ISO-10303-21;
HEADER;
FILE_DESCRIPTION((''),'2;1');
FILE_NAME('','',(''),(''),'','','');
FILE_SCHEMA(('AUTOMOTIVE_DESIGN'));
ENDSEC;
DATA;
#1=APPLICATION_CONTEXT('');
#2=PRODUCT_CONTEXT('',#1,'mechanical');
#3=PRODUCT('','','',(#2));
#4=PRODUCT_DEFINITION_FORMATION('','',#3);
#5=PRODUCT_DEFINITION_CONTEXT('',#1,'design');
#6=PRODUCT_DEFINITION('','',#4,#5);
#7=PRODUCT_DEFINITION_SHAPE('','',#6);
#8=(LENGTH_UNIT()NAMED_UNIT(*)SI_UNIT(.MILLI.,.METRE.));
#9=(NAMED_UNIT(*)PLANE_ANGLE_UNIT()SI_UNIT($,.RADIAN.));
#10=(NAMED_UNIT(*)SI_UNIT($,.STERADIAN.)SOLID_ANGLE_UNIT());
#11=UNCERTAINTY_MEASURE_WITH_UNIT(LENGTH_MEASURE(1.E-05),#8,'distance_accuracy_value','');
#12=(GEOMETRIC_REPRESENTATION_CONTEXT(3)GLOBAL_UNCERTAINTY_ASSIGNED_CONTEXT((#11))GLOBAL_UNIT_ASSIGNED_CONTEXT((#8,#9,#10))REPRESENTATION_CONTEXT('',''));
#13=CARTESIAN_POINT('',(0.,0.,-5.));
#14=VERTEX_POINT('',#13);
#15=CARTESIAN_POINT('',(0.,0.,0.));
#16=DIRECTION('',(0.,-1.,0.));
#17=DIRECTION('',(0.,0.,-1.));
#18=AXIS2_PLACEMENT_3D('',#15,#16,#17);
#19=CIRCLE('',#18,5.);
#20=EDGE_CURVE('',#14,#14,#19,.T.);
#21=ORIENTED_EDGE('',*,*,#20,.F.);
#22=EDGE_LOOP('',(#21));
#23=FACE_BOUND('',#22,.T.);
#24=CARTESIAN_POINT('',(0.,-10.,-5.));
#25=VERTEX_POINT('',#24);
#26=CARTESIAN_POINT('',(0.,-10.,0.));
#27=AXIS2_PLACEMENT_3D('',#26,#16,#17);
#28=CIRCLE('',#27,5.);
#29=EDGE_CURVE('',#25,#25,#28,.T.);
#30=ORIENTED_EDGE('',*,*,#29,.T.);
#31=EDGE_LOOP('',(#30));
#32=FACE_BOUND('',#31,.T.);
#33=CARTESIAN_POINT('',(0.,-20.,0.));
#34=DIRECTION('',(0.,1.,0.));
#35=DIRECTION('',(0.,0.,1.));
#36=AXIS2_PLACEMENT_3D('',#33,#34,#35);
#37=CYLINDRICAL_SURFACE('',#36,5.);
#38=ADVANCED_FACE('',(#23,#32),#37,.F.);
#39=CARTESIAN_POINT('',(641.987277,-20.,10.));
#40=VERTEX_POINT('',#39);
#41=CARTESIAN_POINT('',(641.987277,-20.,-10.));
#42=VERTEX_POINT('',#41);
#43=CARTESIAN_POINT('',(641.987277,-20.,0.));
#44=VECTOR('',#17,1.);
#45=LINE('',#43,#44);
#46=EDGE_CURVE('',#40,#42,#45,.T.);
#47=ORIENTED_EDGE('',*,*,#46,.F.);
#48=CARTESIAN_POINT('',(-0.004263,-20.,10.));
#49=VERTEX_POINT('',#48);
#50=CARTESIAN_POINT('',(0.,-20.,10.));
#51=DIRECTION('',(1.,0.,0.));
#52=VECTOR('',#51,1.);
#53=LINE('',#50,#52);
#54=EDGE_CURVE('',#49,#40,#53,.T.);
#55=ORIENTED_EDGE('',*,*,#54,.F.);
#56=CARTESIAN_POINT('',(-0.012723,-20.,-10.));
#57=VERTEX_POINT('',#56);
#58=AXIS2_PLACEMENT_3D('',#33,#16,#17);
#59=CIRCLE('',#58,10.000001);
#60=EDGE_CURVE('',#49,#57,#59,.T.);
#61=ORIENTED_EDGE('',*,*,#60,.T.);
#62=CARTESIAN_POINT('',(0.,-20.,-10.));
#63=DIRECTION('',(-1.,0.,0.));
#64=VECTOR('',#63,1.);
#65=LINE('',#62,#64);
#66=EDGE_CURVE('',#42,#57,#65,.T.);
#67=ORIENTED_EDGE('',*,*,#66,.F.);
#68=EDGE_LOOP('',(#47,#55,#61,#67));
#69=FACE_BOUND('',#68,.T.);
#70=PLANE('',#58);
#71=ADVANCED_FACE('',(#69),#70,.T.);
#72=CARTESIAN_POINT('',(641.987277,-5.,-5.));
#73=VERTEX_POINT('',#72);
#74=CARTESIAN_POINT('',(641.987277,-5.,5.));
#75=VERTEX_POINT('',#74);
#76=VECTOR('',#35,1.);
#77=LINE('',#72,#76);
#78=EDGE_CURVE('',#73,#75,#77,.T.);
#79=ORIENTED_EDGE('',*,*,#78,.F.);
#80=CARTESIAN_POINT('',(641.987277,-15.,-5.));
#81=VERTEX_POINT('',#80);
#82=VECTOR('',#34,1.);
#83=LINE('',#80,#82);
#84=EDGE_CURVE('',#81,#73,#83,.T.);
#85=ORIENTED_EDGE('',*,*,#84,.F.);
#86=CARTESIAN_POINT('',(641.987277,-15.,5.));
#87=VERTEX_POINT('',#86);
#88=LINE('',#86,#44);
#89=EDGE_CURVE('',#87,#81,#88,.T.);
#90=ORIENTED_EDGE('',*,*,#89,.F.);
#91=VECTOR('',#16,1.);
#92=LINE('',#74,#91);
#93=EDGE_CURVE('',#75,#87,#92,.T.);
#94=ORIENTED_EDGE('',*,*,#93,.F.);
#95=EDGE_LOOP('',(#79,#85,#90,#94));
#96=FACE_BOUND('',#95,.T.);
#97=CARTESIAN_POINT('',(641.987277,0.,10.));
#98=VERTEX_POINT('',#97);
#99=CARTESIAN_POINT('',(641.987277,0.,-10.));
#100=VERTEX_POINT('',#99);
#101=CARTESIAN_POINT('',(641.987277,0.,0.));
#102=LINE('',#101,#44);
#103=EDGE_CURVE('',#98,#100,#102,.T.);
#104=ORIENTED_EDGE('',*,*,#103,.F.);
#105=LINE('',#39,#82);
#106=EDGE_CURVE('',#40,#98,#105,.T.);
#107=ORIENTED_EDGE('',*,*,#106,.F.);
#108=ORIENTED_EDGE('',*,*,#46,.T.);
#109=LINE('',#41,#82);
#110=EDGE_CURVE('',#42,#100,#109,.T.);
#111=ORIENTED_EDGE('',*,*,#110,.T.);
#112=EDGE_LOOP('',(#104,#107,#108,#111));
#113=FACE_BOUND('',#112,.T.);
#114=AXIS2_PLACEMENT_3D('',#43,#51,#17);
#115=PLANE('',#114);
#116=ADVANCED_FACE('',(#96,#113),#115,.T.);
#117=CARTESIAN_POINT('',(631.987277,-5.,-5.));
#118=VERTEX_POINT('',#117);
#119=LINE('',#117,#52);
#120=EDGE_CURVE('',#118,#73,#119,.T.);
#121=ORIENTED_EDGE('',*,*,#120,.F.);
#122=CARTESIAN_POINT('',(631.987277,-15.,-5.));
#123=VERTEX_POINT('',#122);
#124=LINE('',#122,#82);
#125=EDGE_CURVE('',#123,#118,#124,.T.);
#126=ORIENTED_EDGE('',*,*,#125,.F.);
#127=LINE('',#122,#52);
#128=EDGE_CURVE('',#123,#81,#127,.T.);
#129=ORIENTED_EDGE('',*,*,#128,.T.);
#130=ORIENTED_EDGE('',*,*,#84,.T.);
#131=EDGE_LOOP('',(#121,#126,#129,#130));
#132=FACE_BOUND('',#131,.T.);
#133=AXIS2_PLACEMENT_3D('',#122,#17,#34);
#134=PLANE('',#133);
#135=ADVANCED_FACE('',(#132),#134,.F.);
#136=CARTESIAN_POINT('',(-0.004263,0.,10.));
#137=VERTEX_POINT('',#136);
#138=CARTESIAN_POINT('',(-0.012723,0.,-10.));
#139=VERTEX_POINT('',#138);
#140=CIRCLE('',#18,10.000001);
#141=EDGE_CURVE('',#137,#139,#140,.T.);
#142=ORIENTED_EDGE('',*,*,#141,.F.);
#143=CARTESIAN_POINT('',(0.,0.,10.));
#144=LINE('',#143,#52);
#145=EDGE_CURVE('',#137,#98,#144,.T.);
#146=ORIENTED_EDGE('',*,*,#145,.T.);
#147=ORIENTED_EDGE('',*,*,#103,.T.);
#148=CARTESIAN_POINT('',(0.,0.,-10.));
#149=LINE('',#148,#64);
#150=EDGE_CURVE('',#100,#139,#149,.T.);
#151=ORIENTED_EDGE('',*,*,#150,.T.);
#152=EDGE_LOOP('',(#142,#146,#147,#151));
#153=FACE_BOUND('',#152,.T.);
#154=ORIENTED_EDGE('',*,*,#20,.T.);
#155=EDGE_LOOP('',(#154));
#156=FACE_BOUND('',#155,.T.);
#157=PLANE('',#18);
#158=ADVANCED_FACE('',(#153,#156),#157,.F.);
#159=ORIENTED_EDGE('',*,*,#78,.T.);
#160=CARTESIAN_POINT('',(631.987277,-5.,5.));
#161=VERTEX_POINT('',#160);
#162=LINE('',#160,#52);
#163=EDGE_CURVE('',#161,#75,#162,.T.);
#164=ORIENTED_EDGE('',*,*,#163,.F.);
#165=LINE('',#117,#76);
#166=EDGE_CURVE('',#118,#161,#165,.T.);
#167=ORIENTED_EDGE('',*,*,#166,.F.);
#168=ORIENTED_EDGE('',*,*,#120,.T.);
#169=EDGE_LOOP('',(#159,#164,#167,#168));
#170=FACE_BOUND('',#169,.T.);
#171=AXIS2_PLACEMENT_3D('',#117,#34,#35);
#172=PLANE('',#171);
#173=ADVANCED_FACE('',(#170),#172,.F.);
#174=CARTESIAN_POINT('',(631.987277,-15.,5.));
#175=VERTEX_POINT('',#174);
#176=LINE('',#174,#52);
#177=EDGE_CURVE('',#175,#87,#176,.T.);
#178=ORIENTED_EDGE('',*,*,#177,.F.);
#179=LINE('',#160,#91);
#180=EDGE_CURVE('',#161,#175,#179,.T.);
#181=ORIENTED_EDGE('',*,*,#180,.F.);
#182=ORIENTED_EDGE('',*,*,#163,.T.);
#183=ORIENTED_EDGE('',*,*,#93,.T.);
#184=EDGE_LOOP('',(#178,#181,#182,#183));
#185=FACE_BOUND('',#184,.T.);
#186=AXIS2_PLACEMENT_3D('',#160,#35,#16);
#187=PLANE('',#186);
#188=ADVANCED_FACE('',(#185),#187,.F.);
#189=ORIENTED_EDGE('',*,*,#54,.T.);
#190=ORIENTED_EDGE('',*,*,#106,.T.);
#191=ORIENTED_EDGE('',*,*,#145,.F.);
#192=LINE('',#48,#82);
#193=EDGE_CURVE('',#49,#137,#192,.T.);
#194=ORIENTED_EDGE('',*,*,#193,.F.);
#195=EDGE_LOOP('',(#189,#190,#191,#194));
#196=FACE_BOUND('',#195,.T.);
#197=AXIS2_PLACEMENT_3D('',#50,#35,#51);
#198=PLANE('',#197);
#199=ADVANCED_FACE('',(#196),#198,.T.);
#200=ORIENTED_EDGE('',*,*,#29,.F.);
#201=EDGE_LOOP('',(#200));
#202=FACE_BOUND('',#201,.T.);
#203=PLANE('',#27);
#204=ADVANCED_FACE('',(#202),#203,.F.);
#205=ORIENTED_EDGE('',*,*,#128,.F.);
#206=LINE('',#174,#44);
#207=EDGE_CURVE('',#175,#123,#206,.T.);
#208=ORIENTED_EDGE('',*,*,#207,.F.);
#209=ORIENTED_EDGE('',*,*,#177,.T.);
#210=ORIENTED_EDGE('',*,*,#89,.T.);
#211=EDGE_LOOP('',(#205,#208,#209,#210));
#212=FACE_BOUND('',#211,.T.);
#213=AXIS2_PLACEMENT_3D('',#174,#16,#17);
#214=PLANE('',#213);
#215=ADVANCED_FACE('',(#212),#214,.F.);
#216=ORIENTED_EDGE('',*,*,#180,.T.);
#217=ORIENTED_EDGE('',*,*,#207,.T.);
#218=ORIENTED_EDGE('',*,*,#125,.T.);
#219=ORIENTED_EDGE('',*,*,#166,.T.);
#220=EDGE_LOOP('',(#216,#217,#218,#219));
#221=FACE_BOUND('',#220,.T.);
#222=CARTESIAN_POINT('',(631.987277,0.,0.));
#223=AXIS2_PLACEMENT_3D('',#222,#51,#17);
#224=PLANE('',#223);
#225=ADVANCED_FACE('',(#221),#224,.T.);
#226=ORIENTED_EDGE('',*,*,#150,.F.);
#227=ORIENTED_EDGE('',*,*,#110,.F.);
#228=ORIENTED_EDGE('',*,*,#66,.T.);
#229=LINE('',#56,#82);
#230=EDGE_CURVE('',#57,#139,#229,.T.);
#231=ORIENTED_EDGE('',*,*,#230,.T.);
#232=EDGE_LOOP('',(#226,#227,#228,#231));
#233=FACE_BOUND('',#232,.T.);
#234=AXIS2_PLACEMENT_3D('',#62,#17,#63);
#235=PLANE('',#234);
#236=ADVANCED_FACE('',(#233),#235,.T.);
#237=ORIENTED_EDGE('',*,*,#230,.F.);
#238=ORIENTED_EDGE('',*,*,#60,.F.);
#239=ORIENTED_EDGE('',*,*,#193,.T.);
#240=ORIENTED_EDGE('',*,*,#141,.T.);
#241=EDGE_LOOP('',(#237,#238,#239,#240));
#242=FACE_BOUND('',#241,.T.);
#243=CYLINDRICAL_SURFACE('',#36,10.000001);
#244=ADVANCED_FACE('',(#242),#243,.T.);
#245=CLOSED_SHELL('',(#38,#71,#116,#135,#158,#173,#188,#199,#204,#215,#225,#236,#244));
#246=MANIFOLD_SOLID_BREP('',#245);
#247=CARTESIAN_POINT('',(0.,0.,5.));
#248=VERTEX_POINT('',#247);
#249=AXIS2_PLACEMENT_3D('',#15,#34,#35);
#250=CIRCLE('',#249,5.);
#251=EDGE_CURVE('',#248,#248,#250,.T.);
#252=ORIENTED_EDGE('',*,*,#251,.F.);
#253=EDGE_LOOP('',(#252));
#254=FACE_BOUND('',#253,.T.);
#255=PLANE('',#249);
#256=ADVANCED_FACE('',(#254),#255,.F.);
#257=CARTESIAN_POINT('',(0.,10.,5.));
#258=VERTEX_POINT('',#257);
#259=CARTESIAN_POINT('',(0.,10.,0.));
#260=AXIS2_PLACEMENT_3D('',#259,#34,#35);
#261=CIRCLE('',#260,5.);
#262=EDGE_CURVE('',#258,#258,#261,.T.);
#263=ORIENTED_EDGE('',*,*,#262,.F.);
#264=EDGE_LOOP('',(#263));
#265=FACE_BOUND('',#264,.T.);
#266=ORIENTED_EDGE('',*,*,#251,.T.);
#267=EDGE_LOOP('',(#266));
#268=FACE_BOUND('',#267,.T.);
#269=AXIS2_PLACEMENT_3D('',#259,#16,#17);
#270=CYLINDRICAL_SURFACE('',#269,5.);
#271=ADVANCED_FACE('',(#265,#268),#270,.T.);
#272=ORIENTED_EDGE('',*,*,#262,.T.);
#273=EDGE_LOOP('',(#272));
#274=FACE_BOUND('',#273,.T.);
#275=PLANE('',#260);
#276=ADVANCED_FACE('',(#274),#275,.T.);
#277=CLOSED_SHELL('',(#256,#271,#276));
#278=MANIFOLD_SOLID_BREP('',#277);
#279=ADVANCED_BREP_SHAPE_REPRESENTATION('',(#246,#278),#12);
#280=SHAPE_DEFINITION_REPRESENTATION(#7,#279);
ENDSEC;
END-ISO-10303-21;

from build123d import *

# Parameters (mm, degrees)
SKETCH1_R               = 5
BOSS_EXTRUDE1_DEPTH     = 10
BOSS_EXTRUDE2_OUTLINE_R = 5
BOSS_EXTRUDE2_DEPTH     = 20
SKETCH4_W               = 10
SKETCH4_H               = 10
CUT_EXTRUDE1_DEPTH      = 10
SKETCH5_R               = 5
BOSS_EXTRUDE3_DEPTH     = 10


# Read off the part's stored shape, not the designer's step: Boss-Extrude2
with BuildPart() as part:
    # Sketch1 → Boss-Extrude1 (new body)
    with BuildSketch(Plane(origin=(0, 0, 0), x_dir=(1, 0, 0), z_dir=(0, 1, 0))):
        with Locations(Location((0, 0, 0), (0, 0, 270))):
            Circle(SKETCH1_R)
    extrude(amount=BOSS_EXTRUDE1_DEPTH)


with BuildPart() as body_2:
    # Boss-Extrude2 outline → Boss-Extrude2 (new body)
    with BuildSketch(Plane.XZ):
        with BuildLine():
            ThreePointArc((-0.004263044, 10), (-10.000000014, 0.004229813), (-0.012722666, -9.999992815))
            Line((-0.012722666, -9.999992815), (641.987277325, -10))
            Line((641.987277325, -10), (641.987277325, 10))
            Line((641.987277325, 10), (-0.004263044, 10))
        make_face()
        Circle(BOSS_EXTRUDE2_OUTLINE_R, mode=Mode.SUBTRACT)
    extrude(amount=BOSS_EXTRUDE2_DEPTH)

    # Sketch4 → Cut-Extrude1 (cut)
    with BuildSketch(Plane(origin=(641.987277325, 0, 0), x_dir=(0, 0, -1), z_dir=(1, 0, 0))):
        with Locations((0, -10)):
            Rectangle(SKETCH4_W, SKETCH4_H)
    extrude(amount=-CUT_EXTRUDE1_DEPTH, mode=Mode.SUBTRACT)

    # Sketch5 → Boss-Extrude3 (add)
    with BuildSketch(Plane.XZ.offset(20)):
        with Locations(Location((0, 0, 0), (0, 0, 270))):
            Circle(SKETCH5_R)
    extrude(amount=-BOSS_EXTRUDE3_DEPTH)


solid = Compound([part.part, body_2.part])
